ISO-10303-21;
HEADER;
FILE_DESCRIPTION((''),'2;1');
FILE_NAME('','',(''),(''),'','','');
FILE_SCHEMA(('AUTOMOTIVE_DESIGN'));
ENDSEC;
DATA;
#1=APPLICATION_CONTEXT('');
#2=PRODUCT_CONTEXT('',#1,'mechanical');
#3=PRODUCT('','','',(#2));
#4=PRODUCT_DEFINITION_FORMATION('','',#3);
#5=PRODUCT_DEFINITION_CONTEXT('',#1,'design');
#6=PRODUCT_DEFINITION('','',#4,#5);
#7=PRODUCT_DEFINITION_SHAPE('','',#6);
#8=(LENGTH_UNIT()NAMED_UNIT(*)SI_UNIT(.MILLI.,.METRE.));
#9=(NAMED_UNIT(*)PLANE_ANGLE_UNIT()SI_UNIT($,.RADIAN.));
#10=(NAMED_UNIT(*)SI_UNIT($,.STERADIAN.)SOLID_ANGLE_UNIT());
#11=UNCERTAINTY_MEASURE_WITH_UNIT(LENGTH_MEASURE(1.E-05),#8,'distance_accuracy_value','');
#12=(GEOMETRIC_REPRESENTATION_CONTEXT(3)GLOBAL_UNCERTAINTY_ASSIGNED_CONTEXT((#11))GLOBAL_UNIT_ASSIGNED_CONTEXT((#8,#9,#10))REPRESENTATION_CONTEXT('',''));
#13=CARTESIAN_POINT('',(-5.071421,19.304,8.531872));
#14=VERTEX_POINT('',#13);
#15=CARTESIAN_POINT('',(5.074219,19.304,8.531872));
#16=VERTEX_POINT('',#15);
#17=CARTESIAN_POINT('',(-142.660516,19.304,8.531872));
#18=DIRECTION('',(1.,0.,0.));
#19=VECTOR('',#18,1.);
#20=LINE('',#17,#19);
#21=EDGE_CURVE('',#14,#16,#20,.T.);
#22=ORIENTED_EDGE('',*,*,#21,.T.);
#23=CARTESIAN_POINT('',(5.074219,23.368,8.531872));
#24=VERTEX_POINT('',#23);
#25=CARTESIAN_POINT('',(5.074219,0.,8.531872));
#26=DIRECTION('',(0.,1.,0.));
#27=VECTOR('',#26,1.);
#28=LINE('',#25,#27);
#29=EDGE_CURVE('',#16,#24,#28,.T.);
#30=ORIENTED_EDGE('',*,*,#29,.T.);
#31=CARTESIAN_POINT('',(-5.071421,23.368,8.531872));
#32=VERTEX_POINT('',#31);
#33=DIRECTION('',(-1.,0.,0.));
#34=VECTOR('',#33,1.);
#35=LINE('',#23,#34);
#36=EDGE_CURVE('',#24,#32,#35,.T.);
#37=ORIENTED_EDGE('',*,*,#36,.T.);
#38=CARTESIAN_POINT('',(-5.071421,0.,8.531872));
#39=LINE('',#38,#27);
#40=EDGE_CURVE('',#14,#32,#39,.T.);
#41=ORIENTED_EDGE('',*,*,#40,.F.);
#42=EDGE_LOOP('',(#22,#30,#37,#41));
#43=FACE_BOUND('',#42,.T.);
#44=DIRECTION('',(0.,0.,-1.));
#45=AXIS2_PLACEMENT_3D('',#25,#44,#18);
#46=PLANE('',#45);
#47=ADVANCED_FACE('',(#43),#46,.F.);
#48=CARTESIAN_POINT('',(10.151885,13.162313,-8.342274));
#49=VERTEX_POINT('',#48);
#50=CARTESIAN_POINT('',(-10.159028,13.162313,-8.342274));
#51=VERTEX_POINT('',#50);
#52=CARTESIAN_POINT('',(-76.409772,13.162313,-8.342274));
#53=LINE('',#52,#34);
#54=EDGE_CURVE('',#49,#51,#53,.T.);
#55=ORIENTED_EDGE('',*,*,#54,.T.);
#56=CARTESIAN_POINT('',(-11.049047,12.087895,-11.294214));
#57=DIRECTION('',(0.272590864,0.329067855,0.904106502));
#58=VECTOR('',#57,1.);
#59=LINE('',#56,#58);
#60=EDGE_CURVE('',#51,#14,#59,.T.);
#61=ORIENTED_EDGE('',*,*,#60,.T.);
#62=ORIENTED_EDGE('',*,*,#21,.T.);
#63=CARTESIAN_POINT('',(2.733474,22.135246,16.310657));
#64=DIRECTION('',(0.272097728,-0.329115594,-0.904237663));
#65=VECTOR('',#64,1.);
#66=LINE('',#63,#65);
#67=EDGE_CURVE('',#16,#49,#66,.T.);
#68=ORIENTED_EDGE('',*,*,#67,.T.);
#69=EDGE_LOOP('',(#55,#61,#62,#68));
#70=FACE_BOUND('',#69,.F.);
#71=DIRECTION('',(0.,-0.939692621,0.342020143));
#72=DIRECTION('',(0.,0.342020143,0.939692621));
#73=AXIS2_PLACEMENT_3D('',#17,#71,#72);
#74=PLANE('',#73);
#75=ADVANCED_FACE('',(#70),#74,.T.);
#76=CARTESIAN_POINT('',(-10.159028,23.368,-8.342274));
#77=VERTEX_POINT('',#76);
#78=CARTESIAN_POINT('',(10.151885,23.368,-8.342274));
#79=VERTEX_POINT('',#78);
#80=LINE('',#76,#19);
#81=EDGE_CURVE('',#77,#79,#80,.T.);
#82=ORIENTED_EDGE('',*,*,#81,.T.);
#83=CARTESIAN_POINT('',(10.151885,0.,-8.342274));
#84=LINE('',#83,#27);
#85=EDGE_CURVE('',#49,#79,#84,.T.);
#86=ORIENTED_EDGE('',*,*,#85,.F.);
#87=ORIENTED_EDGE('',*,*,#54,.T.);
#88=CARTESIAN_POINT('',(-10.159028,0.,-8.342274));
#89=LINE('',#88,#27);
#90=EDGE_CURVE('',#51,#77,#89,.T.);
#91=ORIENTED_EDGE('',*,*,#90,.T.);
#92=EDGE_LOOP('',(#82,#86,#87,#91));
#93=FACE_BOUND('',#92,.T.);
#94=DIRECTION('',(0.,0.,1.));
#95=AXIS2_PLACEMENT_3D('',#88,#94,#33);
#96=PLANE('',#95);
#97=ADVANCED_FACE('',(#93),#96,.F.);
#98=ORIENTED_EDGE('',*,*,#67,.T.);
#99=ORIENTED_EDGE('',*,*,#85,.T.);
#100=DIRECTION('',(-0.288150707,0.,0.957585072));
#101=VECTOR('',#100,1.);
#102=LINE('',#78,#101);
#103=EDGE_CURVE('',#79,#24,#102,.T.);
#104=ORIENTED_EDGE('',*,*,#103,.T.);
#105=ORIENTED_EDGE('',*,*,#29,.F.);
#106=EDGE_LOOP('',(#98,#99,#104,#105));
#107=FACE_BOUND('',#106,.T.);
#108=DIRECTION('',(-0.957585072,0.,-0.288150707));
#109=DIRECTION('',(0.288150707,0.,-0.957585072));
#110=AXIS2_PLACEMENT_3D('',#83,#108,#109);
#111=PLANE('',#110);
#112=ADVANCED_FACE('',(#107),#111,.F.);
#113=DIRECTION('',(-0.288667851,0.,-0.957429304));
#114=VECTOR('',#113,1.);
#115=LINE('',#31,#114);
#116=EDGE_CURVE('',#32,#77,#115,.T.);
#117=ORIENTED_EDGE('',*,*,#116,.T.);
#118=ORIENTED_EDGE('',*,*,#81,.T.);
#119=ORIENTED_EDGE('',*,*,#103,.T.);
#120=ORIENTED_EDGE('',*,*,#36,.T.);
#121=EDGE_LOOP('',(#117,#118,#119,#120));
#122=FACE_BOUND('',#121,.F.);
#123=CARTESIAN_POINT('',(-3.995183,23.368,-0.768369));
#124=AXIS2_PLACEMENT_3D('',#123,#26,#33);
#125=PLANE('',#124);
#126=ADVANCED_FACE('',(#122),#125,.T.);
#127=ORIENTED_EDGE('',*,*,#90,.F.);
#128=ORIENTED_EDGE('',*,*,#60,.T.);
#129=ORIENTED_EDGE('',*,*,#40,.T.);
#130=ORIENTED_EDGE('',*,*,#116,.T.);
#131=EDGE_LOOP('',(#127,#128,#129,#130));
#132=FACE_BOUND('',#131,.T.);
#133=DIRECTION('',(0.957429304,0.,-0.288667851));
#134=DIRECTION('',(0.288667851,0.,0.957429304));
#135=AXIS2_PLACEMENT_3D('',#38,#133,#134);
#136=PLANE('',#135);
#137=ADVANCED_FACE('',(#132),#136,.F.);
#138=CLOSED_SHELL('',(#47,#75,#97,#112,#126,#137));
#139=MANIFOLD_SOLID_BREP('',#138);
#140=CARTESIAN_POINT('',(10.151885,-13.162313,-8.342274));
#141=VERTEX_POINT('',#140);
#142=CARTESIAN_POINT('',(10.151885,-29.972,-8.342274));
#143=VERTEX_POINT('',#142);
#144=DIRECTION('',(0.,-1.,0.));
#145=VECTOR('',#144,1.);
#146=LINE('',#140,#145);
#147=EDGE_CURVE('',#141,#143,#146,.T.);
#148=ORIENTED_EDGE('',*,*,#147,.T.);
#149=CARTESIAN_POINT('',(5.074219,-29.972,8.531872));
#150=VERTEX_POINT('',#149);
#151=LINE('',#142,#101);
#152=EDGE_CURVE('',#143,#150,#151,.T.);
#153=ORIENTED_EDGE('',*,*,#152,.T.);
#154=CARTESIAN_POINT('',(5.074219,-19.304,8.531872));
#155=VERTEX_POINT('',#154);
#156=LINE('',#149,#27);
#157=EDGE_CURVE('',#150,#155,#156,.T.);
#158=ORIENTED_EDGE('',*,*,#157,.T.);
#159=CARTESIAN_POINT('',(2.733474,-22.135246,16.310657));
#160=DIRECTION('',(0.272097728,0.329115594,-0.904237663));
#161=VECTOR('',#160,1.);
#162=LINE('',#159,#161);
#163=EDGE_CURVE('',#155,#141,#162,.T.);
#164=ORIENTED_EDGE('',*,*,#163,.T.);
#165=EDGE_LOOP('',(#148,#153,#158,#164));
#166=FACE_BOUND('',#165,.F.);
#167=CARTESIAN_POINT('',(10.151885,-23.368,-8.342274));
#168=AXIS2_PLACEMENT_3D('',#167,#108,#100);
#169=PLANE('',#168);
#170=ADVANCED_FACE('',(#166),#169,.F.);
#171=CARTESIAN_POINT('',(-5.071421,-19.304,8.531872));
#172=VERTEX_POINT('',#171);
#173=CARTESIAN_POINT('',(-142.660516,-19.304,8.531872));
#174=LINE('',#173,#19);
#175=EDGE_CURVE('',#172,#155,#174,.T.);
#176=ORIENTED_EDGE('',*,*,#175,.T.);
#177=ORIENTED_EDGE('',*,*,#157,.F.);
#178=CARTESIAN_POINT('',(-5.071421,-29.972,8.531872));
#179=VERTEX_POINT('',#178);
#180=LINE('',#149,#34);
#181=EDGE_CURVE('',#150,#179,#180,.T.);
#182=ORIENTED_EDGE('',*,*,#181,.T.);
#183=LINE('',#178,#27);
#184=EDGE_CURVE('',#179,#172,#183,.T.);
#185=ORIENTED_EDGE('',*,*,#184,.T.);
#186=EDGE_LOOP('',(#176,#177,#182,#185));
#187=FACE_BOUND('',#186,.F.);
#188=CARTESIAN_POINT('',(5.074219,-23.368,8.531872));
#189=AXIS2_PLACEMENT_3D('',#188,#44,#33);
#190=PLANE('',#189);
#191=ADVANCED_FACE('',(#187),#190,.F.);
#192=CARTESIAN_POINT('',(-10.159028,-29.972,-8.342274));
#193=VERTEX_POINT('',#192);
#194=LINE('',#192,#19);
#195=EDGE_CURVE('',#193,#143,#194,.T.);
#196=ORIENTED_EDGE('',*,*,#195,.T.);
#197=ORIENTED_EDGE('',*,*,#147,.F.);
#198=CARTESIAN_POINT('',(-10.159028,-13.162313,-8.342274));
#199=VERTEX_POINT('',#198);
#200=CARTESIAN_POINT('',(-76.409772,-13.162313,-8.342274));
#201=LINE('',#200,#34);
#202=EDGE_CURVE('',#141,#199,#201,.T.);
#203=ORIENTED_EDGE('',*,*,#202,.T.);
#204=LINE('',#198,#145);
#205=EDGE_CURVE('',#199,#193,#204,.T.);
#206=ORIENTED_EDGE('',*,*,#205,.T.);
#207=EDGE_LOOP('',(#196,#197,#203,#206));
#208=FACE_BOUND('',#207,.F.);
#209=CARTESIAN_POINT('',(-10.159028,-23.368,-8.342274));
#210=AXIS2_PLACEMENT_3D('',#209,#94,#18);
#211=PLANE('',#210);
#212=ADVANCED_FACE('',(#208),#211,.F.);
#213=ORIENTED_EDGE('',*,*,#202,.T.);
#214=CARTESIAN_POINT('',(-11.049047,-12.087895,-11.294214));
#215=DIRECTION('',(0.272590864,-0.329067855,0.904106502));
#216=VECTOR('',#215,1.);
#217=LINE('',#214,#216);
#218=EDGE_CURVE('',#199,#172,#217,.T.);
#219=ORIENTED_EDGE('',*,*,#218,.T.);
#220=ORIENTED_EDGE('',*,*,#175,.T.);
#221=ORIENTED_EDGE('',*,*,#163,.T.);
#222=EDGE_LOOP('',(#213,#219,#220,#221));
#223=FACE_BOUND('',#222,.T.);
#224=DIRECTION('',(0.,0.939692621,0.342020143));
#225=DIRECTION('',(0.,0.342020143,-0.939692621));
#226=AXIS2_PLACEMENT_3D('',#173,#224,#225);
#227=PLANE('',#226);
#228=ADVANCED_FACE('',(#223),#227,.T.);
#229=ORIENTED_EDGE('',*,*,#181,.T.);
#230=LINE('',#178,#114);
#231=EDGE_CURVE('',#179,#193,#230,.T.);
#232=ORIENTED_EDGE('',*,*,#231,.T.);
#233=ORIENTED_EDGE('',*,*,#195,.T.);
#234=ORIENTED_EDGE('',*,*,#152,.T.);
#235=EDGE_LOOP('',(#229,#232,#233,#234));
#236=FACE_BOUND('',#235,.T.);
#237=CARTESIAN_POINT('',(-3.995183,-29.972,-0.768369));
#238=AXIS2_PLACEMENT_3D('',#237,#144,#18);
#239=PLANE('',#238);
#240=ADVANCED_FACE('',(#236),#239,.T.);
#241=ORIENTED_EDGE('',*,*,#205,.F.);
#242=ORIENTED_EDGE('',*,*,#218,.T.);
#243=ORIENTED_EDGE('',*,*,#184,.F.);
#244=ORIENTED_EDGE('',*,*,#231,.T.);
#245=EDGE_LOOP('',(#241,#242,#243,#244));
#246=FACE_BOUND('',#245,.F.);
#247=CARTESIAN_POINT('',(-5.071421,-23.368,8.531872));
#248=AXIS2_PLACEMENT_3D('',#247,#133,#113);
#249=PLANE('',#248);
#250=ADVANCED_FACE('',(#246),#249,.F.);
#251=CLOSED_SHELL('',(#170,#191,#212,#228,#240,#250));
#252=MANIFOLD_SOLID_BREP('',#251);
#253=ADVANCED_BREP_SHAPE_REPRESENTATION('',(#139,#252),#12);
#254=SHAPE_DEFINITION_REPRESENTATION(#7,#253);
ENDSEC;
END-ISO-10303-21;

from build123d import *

# Parameters (mm, degrees)
F1_DEPTH    = 23.368
F2_T1_DEPTH = 285.3238303429
F4_DEPTH    = 6.604


# Not quite as in the source:
# - a fillet or chamfer that OpenCascade refuses, or shapes differently, is made with other operations: its cross-section is extruded or revolved along the edge and cut away or added


with BuildPart() as f1:
    # F0 (on Front) → F1 (new body)
    with BuildSketch(Plane.XZ):
        Polygon((0, -8.3422744647), (0, 0), (0, 8.5318721831), (-5.0714211538, 8.5318721831), (-10.1590277627, -8.3422744647), align=None)
        Polygon((0, 8.5318721831), (0, 0), (0, -8.3422744647), (10.1518854499, -8.3422744647), (5.0742193125, 8.5318721831), align=None)
    extrude(amount=F1_DEPTH)

    # F2: chamfer of 19.304 x 53.0373041052 on 1 edges, made by hand

    # F2_s2 → F2_t1 (cut)
    with BuildSketch(Plane.YZ.offset(-142.6605160921)):
        Polygon((-19.304, 8.5318721831), (0, -44.5054319221), (0, 8.5318721831), align=None)
    extrude(amount=F2_T1_DEPTH, mode=Mode.SUBTRACT)


with BuildPart() as f3_1:
    # F3: instance of F1
    add(f1.part.mirror(Plane.XZ))


with BuildPart() as f1_1:
    add(f1.part)

    # F4 (add): a face of the model
    f4_faces = [f1_1.faces().sort_by_distance(p)[0] for p in [
        (-0.0013625187, -23.368, -0.8438622953),
    ]]
    extrude(f4_faces, amount=F4_DEPTH)


solid = Compound([f3_1.part, f1_1.part])
